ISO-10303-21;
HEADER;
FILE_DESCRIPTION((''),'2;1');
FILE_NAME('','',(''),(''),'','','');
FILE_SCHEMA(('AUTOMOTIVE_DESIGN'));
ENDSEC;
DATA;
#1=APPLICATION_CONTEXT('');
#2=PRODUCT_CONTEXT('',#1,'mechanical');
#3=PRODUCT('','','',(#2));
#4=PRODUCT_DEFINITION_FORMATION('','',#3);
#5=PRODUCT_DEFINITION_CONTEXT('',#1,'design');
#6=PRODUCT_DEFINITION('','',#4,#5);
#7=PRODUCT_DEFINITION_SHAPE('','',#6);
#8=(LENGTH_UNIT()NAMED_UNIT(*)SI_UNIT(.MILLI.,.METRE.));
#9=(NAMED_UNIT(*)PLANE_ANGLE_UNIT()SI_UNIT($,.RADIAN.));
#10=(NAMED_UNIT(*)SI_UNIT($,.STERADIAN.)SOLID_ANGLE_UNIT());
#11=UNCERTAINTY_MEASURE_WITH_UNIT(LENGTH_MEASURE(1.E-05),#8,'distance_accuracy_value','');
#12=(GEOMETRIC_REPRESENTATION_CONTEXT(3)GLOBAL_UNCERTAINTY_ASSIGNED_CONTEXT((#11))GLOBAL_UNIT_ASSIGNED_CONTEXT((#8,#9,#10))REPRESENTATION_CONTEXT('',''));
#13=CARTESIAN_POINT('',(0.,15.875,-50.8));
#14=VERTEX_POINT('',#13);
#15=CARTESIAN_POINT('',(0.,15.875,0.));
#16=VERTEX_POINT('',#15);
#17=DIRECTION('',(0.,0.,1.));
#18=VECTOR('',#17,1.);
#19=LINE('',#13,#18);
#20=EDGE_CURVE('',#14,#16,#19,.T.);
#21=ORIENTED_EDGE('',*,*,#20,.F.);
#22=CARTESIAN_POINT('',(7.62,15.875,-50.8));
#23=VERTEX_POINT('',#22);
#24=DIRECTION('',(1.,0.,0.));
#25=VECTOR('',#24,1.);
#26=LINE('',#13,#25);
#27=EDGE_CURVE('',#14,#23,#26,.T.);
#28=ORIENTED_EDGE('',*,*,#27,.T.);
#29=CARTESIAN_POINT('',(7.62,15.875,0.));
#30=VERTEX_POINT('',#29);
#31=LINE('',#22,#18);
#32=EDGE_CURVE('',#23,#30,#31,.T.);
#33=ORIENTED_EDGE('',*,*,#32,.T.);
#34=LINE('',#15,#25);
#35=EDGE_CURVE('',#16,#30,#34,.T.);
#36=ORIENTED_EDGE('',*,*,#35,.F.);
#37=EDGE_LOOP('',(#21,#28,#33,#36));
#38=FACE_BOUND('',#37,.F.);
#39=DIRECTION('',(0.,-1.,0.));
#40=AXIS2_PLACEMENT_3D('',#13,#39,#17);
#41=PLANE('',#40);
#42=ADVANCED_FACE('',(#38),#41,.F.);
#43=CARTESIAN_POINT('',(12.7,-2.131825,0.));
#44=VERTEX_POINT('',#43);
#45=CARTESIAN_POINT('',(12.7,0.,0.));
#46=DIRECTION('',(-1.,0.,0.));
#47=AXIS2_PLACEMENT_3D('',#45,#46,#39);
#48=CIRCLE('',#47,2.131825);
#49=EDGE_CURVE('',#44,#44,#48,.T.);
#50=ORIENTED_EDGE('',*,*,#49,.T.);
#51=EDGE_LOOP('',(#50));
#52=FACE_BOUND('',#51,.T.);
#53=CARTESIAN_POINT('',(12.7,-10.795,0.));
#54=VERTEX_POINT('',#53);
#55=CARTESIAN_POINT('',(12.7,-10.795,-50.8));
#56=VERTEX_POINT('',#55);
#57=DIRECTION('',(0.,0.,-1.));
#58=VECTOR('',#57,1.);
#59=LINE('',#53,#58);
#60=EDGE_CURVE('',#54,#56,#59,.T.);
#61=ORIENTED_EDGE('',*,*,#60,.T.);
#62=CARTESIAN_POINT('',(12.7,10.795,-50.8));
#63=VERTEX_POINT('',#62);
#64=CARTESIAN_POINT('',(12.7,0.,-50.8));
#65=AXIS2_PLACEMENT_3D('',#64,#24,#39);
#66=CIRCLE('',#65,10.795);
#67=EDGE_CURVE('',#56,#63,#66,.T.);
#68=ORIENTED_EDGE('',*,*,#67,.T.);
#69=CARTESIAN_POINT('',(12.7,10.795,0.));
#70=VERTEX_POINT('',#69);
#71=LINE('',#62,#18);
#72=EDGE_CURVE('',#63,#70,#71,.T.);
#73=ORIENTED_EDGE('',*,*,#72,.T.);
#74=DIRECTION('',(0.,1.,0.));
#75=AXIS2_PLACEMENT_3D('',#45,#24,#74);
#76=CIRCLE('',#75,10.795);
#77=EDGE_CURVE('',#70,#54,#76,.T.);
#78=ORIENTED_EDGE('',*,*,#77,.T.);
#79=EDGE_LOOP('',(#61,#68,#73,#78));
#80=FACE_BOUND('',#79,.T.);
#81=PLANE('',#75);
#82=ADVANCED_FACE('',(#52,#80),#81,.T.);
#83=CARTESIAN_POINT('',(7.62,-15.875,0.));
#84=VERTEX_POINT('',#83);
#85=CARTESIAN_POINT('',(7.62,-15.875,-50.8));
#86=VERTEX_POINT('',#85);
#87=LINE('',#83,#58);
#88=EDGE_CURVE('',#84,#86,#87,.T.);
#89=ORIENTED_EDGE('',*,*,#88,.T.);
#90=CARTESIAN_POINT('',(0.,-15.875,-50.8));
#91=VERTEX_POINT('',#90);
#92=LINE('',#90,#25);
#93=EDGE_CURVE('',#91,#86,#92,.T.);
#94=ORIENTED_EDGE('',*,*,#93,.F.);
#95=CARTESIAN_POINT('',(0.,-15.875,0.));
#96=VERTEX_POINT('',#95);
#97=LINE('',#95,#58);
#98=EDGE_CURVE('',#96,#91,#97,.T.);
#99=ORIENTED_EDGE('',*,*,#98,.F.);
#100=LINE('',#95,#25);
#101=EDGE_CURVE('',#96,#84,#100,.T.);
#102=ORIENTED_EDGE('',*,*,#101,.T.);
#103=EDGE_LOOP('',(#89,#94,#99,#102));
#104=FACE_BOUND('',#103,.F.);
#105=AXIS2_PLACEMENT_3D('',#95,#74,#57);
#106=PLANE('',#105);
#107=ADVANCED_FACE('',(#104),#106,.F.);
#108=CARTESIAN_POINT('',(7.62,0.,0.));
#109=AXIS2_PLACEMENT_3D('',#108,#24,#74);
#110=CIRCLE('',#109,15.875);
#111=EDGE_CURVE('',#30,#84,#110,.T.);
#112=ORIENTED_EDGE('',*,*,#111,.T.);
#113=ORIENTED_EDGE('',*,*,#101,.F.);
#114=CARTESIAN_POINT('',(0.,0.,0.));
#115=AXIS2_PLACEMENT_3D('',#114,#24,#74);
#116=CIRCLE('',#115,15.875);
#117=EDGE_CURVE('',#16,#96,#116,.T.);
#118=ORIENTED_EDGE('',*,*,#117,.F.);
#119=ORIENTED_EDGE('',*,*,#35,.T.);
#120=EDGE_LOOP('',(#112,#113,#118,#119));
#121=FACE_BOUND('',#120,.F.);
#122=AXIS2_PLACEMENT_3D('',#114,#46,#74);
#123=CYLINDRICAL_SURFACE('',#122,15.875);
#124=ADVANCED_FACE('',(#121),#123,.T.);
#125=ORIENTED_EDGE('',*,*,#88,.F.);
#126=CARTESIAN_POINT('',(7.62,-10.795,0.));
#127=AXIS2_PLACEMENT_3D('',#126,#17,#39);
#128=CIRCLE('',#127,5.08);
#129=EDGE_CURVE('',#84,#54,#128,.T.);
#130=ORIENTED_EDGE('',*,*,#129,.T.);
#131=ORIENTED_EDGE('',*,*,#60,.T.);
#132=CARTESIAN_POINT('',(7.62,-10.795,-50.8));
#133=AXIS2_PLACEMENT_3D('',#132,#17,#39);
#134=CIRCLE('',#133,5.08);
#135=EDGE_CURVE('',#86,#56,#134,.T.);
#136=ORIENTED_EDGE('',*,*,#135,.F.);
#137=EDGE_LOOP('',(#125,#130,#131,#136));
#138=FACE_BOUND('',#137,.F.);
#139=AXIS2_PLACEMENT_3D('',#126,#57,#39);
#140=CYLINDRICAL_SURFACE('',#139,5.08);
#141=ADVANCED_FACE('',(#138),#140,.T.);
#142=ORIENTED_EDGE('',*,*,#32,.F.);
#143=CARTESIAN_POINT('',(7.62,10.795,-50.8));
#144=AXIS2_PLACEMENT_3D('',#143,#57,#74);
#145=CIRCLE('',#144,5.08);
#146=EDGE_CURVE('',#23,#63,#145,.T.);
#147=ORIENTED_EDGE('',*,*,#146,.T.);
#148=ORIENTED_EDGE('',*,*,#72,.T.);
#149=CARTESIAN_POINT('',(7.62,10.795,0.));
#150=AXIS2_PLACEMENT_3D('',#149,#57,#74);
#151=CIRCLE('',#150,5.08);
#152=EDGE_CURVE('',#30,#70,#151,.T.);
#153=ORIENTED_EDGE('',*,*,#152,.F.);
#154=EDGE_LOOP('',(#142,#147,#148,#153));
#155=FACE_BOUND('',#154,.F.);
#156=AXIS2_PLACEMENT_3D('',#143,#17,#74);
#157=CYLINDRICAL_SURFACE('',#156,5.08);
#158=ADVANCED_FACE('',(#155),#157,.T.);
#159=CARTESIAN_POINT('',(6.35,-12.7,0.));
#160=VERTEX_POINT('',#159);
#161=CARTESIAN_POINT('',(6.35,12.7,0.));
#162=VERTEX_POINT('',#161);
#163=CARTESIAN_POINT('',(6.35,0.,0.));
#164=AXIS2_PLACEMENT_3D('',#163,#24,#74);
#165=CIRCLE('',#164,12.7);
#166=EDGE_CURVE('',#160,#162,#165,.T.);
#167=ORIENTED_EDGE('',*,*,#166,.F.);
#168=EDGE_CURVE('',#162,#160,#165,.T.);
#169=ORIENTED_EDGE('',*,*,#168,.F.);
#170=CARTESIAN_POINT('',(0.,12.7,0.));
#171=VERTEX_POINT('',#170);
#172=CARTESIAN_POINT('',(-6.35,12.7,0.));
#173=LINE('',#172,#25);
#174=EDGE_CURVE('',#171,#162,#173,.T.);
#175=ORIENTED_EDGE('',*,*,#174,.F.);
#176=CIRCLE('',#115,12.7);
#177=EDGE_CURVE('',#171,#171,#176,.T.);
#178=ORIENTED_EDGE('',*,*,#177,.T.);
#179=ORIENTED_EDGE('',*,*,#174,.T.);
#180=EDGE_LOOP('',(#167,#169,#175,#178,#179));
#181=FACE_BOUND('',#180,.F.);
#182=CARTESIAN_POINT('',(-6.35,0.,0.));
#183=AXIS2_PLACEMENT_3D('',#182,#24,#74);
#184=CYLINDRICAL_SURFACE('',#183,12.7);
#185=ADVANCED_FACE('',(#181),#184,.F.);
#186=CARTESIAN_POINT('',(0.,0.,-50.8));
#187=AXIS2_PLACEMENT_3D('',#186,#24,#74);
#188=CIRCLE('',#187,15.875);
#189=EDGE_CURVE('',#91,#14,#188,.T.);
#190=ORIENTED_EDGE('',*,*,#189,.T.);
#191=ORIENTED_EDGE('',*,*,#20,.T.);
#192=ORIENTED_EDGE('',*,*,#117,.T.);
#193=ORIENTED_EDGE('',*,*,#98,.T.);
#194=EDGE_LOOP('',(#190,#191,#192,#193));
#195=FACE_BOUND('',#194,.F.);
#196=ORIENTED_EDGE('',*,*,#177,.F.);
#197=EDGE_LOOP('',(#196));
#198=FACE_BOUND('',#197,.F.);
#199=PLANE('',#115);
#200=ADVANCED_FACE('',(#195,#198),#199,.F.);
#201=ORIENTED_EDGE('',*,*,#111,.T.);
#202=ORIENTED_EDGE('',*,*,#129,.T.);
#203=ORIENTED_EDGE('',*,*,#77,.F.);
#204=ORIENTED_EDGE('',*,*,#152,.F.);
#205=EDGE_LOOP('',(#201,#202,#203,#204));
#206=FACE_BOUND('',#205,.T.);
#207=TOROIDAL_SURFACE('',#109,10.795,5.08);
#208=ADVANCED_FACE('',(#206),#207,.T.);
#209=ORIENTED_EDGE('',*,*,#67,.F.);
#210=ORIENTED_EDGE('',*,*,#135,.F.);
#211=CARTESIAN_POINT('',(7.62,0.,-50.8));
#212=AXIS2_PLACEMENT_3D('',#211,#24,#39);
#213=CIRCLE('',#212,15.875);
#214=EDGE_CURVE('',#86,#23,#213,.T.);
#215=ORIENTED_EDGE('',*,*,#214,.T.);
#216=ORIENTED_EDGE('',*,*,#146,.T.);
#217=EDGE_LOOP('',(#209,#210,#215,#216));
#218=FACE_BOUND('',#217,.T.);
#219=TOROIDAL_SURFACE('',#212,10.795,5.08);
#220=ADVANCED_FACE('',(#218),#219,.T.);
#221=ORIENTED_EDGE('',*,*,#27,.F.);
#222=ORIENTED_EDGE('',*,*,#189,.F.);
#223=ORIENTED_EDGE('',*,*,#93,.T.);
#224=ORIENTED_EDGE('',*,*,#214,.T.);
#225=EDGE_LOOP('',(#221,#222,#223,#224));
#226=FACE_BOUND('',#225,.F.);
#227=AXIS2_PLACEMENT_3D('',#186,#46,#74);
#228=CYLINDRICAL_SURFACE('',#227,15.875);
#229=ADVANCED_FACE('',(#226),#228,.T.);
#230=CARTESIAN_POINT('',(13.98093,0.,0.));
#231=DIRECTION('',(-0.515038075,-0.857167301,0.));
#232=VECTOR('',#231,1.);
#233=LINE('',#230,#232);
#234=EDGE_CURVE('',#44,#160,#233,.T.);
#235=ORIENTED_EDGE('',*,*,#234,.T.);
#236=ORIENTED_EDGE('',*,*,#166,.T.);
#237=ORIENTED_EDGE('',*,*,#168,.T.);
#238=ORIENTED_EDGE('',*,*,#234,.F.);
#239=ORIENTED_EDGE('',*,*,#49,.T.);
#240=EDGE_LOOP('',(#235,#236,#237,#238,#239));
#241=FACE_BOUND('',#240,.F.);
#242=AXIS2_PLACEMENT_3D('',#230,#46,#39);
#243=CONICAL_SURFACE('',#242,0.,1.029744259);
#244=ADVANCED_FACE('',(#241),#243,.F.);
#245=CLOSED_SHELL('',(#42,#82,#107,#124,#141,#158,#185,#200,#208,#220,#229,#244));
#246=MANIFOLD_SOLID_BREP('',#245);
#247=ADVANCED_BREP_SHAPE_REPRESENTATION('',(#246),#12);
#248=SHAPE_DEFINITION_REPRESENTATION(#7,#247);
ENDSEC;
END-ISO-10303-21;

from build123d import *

# Parameters (mm, degrees)
F1_DEPTH = 12.7
F2_R     = 5.08
F4_D     = 25.4
F4_DEPTH = 6.35
F4_TIP   = 7.6309298617


# Not quite as in the source:
# - a feature names something its author has since deleted; it is built from what else it names


with BuildPart() as f1:
    # F0 (on Right) → F1 (new body)
    with BuildSketch(Plane.YZ):
        with BuildLine():
            ThreePointArc((-15.875, 0), (0, -15.875), (15.875, 0))
            ThreePointArc((15.875, 0), (0, 15.875), (-15.875, 0))
        make_face()
        with BuildLine():
            Line((15.875, -50.8), (15.875, 0))
            ThreePointArc((15.875, 0), (0, -15.875), (-15.875, 0))
            Line((-15.875, 0), (-15.875, -50.8))
            ThreePointArc((-15.875, -50.8), (0, -34.925), (15.875, -50.8))
        make_face()
        with BuildLine():
            ThreePointArc((-15.875, -50.8), (0, -66.675), (15.875, -50.8))
            ThreePointArc((15.875, -50.8), (0, -34.925), (-15.875, -50.8))
        make_face()
    extrude(amount=F1_DEPTH)

    # F2
    f2_edges = [f1.edges().sort_by_distance(p)[0] for p in [
        (12.7, 0, 15.875),
        (12.7, -15.875, -25.4),
        (12.7, 0, -66.675),
        (12.7, 15.875, -25.4),
    ]]
    fillet(f2_edges, radius=F2_R)

    # F4
    with Locations(Plane(origin=(0, 0, 0), x_dir=(0, -1, 0), z_dir=(-1, 0, 0))):
        with Locations((0, 0)):
            Hole(F4_D / 2, depth=F4_DEPTH)
            with Locations((0, 0, -(F4_DEPTH + F4_TIP / 2))):  # 118° drill point
                Cone(0, F4_D / 2, F4_TIP, mode=Mode.SUBTRACT)


solid = f1.part
